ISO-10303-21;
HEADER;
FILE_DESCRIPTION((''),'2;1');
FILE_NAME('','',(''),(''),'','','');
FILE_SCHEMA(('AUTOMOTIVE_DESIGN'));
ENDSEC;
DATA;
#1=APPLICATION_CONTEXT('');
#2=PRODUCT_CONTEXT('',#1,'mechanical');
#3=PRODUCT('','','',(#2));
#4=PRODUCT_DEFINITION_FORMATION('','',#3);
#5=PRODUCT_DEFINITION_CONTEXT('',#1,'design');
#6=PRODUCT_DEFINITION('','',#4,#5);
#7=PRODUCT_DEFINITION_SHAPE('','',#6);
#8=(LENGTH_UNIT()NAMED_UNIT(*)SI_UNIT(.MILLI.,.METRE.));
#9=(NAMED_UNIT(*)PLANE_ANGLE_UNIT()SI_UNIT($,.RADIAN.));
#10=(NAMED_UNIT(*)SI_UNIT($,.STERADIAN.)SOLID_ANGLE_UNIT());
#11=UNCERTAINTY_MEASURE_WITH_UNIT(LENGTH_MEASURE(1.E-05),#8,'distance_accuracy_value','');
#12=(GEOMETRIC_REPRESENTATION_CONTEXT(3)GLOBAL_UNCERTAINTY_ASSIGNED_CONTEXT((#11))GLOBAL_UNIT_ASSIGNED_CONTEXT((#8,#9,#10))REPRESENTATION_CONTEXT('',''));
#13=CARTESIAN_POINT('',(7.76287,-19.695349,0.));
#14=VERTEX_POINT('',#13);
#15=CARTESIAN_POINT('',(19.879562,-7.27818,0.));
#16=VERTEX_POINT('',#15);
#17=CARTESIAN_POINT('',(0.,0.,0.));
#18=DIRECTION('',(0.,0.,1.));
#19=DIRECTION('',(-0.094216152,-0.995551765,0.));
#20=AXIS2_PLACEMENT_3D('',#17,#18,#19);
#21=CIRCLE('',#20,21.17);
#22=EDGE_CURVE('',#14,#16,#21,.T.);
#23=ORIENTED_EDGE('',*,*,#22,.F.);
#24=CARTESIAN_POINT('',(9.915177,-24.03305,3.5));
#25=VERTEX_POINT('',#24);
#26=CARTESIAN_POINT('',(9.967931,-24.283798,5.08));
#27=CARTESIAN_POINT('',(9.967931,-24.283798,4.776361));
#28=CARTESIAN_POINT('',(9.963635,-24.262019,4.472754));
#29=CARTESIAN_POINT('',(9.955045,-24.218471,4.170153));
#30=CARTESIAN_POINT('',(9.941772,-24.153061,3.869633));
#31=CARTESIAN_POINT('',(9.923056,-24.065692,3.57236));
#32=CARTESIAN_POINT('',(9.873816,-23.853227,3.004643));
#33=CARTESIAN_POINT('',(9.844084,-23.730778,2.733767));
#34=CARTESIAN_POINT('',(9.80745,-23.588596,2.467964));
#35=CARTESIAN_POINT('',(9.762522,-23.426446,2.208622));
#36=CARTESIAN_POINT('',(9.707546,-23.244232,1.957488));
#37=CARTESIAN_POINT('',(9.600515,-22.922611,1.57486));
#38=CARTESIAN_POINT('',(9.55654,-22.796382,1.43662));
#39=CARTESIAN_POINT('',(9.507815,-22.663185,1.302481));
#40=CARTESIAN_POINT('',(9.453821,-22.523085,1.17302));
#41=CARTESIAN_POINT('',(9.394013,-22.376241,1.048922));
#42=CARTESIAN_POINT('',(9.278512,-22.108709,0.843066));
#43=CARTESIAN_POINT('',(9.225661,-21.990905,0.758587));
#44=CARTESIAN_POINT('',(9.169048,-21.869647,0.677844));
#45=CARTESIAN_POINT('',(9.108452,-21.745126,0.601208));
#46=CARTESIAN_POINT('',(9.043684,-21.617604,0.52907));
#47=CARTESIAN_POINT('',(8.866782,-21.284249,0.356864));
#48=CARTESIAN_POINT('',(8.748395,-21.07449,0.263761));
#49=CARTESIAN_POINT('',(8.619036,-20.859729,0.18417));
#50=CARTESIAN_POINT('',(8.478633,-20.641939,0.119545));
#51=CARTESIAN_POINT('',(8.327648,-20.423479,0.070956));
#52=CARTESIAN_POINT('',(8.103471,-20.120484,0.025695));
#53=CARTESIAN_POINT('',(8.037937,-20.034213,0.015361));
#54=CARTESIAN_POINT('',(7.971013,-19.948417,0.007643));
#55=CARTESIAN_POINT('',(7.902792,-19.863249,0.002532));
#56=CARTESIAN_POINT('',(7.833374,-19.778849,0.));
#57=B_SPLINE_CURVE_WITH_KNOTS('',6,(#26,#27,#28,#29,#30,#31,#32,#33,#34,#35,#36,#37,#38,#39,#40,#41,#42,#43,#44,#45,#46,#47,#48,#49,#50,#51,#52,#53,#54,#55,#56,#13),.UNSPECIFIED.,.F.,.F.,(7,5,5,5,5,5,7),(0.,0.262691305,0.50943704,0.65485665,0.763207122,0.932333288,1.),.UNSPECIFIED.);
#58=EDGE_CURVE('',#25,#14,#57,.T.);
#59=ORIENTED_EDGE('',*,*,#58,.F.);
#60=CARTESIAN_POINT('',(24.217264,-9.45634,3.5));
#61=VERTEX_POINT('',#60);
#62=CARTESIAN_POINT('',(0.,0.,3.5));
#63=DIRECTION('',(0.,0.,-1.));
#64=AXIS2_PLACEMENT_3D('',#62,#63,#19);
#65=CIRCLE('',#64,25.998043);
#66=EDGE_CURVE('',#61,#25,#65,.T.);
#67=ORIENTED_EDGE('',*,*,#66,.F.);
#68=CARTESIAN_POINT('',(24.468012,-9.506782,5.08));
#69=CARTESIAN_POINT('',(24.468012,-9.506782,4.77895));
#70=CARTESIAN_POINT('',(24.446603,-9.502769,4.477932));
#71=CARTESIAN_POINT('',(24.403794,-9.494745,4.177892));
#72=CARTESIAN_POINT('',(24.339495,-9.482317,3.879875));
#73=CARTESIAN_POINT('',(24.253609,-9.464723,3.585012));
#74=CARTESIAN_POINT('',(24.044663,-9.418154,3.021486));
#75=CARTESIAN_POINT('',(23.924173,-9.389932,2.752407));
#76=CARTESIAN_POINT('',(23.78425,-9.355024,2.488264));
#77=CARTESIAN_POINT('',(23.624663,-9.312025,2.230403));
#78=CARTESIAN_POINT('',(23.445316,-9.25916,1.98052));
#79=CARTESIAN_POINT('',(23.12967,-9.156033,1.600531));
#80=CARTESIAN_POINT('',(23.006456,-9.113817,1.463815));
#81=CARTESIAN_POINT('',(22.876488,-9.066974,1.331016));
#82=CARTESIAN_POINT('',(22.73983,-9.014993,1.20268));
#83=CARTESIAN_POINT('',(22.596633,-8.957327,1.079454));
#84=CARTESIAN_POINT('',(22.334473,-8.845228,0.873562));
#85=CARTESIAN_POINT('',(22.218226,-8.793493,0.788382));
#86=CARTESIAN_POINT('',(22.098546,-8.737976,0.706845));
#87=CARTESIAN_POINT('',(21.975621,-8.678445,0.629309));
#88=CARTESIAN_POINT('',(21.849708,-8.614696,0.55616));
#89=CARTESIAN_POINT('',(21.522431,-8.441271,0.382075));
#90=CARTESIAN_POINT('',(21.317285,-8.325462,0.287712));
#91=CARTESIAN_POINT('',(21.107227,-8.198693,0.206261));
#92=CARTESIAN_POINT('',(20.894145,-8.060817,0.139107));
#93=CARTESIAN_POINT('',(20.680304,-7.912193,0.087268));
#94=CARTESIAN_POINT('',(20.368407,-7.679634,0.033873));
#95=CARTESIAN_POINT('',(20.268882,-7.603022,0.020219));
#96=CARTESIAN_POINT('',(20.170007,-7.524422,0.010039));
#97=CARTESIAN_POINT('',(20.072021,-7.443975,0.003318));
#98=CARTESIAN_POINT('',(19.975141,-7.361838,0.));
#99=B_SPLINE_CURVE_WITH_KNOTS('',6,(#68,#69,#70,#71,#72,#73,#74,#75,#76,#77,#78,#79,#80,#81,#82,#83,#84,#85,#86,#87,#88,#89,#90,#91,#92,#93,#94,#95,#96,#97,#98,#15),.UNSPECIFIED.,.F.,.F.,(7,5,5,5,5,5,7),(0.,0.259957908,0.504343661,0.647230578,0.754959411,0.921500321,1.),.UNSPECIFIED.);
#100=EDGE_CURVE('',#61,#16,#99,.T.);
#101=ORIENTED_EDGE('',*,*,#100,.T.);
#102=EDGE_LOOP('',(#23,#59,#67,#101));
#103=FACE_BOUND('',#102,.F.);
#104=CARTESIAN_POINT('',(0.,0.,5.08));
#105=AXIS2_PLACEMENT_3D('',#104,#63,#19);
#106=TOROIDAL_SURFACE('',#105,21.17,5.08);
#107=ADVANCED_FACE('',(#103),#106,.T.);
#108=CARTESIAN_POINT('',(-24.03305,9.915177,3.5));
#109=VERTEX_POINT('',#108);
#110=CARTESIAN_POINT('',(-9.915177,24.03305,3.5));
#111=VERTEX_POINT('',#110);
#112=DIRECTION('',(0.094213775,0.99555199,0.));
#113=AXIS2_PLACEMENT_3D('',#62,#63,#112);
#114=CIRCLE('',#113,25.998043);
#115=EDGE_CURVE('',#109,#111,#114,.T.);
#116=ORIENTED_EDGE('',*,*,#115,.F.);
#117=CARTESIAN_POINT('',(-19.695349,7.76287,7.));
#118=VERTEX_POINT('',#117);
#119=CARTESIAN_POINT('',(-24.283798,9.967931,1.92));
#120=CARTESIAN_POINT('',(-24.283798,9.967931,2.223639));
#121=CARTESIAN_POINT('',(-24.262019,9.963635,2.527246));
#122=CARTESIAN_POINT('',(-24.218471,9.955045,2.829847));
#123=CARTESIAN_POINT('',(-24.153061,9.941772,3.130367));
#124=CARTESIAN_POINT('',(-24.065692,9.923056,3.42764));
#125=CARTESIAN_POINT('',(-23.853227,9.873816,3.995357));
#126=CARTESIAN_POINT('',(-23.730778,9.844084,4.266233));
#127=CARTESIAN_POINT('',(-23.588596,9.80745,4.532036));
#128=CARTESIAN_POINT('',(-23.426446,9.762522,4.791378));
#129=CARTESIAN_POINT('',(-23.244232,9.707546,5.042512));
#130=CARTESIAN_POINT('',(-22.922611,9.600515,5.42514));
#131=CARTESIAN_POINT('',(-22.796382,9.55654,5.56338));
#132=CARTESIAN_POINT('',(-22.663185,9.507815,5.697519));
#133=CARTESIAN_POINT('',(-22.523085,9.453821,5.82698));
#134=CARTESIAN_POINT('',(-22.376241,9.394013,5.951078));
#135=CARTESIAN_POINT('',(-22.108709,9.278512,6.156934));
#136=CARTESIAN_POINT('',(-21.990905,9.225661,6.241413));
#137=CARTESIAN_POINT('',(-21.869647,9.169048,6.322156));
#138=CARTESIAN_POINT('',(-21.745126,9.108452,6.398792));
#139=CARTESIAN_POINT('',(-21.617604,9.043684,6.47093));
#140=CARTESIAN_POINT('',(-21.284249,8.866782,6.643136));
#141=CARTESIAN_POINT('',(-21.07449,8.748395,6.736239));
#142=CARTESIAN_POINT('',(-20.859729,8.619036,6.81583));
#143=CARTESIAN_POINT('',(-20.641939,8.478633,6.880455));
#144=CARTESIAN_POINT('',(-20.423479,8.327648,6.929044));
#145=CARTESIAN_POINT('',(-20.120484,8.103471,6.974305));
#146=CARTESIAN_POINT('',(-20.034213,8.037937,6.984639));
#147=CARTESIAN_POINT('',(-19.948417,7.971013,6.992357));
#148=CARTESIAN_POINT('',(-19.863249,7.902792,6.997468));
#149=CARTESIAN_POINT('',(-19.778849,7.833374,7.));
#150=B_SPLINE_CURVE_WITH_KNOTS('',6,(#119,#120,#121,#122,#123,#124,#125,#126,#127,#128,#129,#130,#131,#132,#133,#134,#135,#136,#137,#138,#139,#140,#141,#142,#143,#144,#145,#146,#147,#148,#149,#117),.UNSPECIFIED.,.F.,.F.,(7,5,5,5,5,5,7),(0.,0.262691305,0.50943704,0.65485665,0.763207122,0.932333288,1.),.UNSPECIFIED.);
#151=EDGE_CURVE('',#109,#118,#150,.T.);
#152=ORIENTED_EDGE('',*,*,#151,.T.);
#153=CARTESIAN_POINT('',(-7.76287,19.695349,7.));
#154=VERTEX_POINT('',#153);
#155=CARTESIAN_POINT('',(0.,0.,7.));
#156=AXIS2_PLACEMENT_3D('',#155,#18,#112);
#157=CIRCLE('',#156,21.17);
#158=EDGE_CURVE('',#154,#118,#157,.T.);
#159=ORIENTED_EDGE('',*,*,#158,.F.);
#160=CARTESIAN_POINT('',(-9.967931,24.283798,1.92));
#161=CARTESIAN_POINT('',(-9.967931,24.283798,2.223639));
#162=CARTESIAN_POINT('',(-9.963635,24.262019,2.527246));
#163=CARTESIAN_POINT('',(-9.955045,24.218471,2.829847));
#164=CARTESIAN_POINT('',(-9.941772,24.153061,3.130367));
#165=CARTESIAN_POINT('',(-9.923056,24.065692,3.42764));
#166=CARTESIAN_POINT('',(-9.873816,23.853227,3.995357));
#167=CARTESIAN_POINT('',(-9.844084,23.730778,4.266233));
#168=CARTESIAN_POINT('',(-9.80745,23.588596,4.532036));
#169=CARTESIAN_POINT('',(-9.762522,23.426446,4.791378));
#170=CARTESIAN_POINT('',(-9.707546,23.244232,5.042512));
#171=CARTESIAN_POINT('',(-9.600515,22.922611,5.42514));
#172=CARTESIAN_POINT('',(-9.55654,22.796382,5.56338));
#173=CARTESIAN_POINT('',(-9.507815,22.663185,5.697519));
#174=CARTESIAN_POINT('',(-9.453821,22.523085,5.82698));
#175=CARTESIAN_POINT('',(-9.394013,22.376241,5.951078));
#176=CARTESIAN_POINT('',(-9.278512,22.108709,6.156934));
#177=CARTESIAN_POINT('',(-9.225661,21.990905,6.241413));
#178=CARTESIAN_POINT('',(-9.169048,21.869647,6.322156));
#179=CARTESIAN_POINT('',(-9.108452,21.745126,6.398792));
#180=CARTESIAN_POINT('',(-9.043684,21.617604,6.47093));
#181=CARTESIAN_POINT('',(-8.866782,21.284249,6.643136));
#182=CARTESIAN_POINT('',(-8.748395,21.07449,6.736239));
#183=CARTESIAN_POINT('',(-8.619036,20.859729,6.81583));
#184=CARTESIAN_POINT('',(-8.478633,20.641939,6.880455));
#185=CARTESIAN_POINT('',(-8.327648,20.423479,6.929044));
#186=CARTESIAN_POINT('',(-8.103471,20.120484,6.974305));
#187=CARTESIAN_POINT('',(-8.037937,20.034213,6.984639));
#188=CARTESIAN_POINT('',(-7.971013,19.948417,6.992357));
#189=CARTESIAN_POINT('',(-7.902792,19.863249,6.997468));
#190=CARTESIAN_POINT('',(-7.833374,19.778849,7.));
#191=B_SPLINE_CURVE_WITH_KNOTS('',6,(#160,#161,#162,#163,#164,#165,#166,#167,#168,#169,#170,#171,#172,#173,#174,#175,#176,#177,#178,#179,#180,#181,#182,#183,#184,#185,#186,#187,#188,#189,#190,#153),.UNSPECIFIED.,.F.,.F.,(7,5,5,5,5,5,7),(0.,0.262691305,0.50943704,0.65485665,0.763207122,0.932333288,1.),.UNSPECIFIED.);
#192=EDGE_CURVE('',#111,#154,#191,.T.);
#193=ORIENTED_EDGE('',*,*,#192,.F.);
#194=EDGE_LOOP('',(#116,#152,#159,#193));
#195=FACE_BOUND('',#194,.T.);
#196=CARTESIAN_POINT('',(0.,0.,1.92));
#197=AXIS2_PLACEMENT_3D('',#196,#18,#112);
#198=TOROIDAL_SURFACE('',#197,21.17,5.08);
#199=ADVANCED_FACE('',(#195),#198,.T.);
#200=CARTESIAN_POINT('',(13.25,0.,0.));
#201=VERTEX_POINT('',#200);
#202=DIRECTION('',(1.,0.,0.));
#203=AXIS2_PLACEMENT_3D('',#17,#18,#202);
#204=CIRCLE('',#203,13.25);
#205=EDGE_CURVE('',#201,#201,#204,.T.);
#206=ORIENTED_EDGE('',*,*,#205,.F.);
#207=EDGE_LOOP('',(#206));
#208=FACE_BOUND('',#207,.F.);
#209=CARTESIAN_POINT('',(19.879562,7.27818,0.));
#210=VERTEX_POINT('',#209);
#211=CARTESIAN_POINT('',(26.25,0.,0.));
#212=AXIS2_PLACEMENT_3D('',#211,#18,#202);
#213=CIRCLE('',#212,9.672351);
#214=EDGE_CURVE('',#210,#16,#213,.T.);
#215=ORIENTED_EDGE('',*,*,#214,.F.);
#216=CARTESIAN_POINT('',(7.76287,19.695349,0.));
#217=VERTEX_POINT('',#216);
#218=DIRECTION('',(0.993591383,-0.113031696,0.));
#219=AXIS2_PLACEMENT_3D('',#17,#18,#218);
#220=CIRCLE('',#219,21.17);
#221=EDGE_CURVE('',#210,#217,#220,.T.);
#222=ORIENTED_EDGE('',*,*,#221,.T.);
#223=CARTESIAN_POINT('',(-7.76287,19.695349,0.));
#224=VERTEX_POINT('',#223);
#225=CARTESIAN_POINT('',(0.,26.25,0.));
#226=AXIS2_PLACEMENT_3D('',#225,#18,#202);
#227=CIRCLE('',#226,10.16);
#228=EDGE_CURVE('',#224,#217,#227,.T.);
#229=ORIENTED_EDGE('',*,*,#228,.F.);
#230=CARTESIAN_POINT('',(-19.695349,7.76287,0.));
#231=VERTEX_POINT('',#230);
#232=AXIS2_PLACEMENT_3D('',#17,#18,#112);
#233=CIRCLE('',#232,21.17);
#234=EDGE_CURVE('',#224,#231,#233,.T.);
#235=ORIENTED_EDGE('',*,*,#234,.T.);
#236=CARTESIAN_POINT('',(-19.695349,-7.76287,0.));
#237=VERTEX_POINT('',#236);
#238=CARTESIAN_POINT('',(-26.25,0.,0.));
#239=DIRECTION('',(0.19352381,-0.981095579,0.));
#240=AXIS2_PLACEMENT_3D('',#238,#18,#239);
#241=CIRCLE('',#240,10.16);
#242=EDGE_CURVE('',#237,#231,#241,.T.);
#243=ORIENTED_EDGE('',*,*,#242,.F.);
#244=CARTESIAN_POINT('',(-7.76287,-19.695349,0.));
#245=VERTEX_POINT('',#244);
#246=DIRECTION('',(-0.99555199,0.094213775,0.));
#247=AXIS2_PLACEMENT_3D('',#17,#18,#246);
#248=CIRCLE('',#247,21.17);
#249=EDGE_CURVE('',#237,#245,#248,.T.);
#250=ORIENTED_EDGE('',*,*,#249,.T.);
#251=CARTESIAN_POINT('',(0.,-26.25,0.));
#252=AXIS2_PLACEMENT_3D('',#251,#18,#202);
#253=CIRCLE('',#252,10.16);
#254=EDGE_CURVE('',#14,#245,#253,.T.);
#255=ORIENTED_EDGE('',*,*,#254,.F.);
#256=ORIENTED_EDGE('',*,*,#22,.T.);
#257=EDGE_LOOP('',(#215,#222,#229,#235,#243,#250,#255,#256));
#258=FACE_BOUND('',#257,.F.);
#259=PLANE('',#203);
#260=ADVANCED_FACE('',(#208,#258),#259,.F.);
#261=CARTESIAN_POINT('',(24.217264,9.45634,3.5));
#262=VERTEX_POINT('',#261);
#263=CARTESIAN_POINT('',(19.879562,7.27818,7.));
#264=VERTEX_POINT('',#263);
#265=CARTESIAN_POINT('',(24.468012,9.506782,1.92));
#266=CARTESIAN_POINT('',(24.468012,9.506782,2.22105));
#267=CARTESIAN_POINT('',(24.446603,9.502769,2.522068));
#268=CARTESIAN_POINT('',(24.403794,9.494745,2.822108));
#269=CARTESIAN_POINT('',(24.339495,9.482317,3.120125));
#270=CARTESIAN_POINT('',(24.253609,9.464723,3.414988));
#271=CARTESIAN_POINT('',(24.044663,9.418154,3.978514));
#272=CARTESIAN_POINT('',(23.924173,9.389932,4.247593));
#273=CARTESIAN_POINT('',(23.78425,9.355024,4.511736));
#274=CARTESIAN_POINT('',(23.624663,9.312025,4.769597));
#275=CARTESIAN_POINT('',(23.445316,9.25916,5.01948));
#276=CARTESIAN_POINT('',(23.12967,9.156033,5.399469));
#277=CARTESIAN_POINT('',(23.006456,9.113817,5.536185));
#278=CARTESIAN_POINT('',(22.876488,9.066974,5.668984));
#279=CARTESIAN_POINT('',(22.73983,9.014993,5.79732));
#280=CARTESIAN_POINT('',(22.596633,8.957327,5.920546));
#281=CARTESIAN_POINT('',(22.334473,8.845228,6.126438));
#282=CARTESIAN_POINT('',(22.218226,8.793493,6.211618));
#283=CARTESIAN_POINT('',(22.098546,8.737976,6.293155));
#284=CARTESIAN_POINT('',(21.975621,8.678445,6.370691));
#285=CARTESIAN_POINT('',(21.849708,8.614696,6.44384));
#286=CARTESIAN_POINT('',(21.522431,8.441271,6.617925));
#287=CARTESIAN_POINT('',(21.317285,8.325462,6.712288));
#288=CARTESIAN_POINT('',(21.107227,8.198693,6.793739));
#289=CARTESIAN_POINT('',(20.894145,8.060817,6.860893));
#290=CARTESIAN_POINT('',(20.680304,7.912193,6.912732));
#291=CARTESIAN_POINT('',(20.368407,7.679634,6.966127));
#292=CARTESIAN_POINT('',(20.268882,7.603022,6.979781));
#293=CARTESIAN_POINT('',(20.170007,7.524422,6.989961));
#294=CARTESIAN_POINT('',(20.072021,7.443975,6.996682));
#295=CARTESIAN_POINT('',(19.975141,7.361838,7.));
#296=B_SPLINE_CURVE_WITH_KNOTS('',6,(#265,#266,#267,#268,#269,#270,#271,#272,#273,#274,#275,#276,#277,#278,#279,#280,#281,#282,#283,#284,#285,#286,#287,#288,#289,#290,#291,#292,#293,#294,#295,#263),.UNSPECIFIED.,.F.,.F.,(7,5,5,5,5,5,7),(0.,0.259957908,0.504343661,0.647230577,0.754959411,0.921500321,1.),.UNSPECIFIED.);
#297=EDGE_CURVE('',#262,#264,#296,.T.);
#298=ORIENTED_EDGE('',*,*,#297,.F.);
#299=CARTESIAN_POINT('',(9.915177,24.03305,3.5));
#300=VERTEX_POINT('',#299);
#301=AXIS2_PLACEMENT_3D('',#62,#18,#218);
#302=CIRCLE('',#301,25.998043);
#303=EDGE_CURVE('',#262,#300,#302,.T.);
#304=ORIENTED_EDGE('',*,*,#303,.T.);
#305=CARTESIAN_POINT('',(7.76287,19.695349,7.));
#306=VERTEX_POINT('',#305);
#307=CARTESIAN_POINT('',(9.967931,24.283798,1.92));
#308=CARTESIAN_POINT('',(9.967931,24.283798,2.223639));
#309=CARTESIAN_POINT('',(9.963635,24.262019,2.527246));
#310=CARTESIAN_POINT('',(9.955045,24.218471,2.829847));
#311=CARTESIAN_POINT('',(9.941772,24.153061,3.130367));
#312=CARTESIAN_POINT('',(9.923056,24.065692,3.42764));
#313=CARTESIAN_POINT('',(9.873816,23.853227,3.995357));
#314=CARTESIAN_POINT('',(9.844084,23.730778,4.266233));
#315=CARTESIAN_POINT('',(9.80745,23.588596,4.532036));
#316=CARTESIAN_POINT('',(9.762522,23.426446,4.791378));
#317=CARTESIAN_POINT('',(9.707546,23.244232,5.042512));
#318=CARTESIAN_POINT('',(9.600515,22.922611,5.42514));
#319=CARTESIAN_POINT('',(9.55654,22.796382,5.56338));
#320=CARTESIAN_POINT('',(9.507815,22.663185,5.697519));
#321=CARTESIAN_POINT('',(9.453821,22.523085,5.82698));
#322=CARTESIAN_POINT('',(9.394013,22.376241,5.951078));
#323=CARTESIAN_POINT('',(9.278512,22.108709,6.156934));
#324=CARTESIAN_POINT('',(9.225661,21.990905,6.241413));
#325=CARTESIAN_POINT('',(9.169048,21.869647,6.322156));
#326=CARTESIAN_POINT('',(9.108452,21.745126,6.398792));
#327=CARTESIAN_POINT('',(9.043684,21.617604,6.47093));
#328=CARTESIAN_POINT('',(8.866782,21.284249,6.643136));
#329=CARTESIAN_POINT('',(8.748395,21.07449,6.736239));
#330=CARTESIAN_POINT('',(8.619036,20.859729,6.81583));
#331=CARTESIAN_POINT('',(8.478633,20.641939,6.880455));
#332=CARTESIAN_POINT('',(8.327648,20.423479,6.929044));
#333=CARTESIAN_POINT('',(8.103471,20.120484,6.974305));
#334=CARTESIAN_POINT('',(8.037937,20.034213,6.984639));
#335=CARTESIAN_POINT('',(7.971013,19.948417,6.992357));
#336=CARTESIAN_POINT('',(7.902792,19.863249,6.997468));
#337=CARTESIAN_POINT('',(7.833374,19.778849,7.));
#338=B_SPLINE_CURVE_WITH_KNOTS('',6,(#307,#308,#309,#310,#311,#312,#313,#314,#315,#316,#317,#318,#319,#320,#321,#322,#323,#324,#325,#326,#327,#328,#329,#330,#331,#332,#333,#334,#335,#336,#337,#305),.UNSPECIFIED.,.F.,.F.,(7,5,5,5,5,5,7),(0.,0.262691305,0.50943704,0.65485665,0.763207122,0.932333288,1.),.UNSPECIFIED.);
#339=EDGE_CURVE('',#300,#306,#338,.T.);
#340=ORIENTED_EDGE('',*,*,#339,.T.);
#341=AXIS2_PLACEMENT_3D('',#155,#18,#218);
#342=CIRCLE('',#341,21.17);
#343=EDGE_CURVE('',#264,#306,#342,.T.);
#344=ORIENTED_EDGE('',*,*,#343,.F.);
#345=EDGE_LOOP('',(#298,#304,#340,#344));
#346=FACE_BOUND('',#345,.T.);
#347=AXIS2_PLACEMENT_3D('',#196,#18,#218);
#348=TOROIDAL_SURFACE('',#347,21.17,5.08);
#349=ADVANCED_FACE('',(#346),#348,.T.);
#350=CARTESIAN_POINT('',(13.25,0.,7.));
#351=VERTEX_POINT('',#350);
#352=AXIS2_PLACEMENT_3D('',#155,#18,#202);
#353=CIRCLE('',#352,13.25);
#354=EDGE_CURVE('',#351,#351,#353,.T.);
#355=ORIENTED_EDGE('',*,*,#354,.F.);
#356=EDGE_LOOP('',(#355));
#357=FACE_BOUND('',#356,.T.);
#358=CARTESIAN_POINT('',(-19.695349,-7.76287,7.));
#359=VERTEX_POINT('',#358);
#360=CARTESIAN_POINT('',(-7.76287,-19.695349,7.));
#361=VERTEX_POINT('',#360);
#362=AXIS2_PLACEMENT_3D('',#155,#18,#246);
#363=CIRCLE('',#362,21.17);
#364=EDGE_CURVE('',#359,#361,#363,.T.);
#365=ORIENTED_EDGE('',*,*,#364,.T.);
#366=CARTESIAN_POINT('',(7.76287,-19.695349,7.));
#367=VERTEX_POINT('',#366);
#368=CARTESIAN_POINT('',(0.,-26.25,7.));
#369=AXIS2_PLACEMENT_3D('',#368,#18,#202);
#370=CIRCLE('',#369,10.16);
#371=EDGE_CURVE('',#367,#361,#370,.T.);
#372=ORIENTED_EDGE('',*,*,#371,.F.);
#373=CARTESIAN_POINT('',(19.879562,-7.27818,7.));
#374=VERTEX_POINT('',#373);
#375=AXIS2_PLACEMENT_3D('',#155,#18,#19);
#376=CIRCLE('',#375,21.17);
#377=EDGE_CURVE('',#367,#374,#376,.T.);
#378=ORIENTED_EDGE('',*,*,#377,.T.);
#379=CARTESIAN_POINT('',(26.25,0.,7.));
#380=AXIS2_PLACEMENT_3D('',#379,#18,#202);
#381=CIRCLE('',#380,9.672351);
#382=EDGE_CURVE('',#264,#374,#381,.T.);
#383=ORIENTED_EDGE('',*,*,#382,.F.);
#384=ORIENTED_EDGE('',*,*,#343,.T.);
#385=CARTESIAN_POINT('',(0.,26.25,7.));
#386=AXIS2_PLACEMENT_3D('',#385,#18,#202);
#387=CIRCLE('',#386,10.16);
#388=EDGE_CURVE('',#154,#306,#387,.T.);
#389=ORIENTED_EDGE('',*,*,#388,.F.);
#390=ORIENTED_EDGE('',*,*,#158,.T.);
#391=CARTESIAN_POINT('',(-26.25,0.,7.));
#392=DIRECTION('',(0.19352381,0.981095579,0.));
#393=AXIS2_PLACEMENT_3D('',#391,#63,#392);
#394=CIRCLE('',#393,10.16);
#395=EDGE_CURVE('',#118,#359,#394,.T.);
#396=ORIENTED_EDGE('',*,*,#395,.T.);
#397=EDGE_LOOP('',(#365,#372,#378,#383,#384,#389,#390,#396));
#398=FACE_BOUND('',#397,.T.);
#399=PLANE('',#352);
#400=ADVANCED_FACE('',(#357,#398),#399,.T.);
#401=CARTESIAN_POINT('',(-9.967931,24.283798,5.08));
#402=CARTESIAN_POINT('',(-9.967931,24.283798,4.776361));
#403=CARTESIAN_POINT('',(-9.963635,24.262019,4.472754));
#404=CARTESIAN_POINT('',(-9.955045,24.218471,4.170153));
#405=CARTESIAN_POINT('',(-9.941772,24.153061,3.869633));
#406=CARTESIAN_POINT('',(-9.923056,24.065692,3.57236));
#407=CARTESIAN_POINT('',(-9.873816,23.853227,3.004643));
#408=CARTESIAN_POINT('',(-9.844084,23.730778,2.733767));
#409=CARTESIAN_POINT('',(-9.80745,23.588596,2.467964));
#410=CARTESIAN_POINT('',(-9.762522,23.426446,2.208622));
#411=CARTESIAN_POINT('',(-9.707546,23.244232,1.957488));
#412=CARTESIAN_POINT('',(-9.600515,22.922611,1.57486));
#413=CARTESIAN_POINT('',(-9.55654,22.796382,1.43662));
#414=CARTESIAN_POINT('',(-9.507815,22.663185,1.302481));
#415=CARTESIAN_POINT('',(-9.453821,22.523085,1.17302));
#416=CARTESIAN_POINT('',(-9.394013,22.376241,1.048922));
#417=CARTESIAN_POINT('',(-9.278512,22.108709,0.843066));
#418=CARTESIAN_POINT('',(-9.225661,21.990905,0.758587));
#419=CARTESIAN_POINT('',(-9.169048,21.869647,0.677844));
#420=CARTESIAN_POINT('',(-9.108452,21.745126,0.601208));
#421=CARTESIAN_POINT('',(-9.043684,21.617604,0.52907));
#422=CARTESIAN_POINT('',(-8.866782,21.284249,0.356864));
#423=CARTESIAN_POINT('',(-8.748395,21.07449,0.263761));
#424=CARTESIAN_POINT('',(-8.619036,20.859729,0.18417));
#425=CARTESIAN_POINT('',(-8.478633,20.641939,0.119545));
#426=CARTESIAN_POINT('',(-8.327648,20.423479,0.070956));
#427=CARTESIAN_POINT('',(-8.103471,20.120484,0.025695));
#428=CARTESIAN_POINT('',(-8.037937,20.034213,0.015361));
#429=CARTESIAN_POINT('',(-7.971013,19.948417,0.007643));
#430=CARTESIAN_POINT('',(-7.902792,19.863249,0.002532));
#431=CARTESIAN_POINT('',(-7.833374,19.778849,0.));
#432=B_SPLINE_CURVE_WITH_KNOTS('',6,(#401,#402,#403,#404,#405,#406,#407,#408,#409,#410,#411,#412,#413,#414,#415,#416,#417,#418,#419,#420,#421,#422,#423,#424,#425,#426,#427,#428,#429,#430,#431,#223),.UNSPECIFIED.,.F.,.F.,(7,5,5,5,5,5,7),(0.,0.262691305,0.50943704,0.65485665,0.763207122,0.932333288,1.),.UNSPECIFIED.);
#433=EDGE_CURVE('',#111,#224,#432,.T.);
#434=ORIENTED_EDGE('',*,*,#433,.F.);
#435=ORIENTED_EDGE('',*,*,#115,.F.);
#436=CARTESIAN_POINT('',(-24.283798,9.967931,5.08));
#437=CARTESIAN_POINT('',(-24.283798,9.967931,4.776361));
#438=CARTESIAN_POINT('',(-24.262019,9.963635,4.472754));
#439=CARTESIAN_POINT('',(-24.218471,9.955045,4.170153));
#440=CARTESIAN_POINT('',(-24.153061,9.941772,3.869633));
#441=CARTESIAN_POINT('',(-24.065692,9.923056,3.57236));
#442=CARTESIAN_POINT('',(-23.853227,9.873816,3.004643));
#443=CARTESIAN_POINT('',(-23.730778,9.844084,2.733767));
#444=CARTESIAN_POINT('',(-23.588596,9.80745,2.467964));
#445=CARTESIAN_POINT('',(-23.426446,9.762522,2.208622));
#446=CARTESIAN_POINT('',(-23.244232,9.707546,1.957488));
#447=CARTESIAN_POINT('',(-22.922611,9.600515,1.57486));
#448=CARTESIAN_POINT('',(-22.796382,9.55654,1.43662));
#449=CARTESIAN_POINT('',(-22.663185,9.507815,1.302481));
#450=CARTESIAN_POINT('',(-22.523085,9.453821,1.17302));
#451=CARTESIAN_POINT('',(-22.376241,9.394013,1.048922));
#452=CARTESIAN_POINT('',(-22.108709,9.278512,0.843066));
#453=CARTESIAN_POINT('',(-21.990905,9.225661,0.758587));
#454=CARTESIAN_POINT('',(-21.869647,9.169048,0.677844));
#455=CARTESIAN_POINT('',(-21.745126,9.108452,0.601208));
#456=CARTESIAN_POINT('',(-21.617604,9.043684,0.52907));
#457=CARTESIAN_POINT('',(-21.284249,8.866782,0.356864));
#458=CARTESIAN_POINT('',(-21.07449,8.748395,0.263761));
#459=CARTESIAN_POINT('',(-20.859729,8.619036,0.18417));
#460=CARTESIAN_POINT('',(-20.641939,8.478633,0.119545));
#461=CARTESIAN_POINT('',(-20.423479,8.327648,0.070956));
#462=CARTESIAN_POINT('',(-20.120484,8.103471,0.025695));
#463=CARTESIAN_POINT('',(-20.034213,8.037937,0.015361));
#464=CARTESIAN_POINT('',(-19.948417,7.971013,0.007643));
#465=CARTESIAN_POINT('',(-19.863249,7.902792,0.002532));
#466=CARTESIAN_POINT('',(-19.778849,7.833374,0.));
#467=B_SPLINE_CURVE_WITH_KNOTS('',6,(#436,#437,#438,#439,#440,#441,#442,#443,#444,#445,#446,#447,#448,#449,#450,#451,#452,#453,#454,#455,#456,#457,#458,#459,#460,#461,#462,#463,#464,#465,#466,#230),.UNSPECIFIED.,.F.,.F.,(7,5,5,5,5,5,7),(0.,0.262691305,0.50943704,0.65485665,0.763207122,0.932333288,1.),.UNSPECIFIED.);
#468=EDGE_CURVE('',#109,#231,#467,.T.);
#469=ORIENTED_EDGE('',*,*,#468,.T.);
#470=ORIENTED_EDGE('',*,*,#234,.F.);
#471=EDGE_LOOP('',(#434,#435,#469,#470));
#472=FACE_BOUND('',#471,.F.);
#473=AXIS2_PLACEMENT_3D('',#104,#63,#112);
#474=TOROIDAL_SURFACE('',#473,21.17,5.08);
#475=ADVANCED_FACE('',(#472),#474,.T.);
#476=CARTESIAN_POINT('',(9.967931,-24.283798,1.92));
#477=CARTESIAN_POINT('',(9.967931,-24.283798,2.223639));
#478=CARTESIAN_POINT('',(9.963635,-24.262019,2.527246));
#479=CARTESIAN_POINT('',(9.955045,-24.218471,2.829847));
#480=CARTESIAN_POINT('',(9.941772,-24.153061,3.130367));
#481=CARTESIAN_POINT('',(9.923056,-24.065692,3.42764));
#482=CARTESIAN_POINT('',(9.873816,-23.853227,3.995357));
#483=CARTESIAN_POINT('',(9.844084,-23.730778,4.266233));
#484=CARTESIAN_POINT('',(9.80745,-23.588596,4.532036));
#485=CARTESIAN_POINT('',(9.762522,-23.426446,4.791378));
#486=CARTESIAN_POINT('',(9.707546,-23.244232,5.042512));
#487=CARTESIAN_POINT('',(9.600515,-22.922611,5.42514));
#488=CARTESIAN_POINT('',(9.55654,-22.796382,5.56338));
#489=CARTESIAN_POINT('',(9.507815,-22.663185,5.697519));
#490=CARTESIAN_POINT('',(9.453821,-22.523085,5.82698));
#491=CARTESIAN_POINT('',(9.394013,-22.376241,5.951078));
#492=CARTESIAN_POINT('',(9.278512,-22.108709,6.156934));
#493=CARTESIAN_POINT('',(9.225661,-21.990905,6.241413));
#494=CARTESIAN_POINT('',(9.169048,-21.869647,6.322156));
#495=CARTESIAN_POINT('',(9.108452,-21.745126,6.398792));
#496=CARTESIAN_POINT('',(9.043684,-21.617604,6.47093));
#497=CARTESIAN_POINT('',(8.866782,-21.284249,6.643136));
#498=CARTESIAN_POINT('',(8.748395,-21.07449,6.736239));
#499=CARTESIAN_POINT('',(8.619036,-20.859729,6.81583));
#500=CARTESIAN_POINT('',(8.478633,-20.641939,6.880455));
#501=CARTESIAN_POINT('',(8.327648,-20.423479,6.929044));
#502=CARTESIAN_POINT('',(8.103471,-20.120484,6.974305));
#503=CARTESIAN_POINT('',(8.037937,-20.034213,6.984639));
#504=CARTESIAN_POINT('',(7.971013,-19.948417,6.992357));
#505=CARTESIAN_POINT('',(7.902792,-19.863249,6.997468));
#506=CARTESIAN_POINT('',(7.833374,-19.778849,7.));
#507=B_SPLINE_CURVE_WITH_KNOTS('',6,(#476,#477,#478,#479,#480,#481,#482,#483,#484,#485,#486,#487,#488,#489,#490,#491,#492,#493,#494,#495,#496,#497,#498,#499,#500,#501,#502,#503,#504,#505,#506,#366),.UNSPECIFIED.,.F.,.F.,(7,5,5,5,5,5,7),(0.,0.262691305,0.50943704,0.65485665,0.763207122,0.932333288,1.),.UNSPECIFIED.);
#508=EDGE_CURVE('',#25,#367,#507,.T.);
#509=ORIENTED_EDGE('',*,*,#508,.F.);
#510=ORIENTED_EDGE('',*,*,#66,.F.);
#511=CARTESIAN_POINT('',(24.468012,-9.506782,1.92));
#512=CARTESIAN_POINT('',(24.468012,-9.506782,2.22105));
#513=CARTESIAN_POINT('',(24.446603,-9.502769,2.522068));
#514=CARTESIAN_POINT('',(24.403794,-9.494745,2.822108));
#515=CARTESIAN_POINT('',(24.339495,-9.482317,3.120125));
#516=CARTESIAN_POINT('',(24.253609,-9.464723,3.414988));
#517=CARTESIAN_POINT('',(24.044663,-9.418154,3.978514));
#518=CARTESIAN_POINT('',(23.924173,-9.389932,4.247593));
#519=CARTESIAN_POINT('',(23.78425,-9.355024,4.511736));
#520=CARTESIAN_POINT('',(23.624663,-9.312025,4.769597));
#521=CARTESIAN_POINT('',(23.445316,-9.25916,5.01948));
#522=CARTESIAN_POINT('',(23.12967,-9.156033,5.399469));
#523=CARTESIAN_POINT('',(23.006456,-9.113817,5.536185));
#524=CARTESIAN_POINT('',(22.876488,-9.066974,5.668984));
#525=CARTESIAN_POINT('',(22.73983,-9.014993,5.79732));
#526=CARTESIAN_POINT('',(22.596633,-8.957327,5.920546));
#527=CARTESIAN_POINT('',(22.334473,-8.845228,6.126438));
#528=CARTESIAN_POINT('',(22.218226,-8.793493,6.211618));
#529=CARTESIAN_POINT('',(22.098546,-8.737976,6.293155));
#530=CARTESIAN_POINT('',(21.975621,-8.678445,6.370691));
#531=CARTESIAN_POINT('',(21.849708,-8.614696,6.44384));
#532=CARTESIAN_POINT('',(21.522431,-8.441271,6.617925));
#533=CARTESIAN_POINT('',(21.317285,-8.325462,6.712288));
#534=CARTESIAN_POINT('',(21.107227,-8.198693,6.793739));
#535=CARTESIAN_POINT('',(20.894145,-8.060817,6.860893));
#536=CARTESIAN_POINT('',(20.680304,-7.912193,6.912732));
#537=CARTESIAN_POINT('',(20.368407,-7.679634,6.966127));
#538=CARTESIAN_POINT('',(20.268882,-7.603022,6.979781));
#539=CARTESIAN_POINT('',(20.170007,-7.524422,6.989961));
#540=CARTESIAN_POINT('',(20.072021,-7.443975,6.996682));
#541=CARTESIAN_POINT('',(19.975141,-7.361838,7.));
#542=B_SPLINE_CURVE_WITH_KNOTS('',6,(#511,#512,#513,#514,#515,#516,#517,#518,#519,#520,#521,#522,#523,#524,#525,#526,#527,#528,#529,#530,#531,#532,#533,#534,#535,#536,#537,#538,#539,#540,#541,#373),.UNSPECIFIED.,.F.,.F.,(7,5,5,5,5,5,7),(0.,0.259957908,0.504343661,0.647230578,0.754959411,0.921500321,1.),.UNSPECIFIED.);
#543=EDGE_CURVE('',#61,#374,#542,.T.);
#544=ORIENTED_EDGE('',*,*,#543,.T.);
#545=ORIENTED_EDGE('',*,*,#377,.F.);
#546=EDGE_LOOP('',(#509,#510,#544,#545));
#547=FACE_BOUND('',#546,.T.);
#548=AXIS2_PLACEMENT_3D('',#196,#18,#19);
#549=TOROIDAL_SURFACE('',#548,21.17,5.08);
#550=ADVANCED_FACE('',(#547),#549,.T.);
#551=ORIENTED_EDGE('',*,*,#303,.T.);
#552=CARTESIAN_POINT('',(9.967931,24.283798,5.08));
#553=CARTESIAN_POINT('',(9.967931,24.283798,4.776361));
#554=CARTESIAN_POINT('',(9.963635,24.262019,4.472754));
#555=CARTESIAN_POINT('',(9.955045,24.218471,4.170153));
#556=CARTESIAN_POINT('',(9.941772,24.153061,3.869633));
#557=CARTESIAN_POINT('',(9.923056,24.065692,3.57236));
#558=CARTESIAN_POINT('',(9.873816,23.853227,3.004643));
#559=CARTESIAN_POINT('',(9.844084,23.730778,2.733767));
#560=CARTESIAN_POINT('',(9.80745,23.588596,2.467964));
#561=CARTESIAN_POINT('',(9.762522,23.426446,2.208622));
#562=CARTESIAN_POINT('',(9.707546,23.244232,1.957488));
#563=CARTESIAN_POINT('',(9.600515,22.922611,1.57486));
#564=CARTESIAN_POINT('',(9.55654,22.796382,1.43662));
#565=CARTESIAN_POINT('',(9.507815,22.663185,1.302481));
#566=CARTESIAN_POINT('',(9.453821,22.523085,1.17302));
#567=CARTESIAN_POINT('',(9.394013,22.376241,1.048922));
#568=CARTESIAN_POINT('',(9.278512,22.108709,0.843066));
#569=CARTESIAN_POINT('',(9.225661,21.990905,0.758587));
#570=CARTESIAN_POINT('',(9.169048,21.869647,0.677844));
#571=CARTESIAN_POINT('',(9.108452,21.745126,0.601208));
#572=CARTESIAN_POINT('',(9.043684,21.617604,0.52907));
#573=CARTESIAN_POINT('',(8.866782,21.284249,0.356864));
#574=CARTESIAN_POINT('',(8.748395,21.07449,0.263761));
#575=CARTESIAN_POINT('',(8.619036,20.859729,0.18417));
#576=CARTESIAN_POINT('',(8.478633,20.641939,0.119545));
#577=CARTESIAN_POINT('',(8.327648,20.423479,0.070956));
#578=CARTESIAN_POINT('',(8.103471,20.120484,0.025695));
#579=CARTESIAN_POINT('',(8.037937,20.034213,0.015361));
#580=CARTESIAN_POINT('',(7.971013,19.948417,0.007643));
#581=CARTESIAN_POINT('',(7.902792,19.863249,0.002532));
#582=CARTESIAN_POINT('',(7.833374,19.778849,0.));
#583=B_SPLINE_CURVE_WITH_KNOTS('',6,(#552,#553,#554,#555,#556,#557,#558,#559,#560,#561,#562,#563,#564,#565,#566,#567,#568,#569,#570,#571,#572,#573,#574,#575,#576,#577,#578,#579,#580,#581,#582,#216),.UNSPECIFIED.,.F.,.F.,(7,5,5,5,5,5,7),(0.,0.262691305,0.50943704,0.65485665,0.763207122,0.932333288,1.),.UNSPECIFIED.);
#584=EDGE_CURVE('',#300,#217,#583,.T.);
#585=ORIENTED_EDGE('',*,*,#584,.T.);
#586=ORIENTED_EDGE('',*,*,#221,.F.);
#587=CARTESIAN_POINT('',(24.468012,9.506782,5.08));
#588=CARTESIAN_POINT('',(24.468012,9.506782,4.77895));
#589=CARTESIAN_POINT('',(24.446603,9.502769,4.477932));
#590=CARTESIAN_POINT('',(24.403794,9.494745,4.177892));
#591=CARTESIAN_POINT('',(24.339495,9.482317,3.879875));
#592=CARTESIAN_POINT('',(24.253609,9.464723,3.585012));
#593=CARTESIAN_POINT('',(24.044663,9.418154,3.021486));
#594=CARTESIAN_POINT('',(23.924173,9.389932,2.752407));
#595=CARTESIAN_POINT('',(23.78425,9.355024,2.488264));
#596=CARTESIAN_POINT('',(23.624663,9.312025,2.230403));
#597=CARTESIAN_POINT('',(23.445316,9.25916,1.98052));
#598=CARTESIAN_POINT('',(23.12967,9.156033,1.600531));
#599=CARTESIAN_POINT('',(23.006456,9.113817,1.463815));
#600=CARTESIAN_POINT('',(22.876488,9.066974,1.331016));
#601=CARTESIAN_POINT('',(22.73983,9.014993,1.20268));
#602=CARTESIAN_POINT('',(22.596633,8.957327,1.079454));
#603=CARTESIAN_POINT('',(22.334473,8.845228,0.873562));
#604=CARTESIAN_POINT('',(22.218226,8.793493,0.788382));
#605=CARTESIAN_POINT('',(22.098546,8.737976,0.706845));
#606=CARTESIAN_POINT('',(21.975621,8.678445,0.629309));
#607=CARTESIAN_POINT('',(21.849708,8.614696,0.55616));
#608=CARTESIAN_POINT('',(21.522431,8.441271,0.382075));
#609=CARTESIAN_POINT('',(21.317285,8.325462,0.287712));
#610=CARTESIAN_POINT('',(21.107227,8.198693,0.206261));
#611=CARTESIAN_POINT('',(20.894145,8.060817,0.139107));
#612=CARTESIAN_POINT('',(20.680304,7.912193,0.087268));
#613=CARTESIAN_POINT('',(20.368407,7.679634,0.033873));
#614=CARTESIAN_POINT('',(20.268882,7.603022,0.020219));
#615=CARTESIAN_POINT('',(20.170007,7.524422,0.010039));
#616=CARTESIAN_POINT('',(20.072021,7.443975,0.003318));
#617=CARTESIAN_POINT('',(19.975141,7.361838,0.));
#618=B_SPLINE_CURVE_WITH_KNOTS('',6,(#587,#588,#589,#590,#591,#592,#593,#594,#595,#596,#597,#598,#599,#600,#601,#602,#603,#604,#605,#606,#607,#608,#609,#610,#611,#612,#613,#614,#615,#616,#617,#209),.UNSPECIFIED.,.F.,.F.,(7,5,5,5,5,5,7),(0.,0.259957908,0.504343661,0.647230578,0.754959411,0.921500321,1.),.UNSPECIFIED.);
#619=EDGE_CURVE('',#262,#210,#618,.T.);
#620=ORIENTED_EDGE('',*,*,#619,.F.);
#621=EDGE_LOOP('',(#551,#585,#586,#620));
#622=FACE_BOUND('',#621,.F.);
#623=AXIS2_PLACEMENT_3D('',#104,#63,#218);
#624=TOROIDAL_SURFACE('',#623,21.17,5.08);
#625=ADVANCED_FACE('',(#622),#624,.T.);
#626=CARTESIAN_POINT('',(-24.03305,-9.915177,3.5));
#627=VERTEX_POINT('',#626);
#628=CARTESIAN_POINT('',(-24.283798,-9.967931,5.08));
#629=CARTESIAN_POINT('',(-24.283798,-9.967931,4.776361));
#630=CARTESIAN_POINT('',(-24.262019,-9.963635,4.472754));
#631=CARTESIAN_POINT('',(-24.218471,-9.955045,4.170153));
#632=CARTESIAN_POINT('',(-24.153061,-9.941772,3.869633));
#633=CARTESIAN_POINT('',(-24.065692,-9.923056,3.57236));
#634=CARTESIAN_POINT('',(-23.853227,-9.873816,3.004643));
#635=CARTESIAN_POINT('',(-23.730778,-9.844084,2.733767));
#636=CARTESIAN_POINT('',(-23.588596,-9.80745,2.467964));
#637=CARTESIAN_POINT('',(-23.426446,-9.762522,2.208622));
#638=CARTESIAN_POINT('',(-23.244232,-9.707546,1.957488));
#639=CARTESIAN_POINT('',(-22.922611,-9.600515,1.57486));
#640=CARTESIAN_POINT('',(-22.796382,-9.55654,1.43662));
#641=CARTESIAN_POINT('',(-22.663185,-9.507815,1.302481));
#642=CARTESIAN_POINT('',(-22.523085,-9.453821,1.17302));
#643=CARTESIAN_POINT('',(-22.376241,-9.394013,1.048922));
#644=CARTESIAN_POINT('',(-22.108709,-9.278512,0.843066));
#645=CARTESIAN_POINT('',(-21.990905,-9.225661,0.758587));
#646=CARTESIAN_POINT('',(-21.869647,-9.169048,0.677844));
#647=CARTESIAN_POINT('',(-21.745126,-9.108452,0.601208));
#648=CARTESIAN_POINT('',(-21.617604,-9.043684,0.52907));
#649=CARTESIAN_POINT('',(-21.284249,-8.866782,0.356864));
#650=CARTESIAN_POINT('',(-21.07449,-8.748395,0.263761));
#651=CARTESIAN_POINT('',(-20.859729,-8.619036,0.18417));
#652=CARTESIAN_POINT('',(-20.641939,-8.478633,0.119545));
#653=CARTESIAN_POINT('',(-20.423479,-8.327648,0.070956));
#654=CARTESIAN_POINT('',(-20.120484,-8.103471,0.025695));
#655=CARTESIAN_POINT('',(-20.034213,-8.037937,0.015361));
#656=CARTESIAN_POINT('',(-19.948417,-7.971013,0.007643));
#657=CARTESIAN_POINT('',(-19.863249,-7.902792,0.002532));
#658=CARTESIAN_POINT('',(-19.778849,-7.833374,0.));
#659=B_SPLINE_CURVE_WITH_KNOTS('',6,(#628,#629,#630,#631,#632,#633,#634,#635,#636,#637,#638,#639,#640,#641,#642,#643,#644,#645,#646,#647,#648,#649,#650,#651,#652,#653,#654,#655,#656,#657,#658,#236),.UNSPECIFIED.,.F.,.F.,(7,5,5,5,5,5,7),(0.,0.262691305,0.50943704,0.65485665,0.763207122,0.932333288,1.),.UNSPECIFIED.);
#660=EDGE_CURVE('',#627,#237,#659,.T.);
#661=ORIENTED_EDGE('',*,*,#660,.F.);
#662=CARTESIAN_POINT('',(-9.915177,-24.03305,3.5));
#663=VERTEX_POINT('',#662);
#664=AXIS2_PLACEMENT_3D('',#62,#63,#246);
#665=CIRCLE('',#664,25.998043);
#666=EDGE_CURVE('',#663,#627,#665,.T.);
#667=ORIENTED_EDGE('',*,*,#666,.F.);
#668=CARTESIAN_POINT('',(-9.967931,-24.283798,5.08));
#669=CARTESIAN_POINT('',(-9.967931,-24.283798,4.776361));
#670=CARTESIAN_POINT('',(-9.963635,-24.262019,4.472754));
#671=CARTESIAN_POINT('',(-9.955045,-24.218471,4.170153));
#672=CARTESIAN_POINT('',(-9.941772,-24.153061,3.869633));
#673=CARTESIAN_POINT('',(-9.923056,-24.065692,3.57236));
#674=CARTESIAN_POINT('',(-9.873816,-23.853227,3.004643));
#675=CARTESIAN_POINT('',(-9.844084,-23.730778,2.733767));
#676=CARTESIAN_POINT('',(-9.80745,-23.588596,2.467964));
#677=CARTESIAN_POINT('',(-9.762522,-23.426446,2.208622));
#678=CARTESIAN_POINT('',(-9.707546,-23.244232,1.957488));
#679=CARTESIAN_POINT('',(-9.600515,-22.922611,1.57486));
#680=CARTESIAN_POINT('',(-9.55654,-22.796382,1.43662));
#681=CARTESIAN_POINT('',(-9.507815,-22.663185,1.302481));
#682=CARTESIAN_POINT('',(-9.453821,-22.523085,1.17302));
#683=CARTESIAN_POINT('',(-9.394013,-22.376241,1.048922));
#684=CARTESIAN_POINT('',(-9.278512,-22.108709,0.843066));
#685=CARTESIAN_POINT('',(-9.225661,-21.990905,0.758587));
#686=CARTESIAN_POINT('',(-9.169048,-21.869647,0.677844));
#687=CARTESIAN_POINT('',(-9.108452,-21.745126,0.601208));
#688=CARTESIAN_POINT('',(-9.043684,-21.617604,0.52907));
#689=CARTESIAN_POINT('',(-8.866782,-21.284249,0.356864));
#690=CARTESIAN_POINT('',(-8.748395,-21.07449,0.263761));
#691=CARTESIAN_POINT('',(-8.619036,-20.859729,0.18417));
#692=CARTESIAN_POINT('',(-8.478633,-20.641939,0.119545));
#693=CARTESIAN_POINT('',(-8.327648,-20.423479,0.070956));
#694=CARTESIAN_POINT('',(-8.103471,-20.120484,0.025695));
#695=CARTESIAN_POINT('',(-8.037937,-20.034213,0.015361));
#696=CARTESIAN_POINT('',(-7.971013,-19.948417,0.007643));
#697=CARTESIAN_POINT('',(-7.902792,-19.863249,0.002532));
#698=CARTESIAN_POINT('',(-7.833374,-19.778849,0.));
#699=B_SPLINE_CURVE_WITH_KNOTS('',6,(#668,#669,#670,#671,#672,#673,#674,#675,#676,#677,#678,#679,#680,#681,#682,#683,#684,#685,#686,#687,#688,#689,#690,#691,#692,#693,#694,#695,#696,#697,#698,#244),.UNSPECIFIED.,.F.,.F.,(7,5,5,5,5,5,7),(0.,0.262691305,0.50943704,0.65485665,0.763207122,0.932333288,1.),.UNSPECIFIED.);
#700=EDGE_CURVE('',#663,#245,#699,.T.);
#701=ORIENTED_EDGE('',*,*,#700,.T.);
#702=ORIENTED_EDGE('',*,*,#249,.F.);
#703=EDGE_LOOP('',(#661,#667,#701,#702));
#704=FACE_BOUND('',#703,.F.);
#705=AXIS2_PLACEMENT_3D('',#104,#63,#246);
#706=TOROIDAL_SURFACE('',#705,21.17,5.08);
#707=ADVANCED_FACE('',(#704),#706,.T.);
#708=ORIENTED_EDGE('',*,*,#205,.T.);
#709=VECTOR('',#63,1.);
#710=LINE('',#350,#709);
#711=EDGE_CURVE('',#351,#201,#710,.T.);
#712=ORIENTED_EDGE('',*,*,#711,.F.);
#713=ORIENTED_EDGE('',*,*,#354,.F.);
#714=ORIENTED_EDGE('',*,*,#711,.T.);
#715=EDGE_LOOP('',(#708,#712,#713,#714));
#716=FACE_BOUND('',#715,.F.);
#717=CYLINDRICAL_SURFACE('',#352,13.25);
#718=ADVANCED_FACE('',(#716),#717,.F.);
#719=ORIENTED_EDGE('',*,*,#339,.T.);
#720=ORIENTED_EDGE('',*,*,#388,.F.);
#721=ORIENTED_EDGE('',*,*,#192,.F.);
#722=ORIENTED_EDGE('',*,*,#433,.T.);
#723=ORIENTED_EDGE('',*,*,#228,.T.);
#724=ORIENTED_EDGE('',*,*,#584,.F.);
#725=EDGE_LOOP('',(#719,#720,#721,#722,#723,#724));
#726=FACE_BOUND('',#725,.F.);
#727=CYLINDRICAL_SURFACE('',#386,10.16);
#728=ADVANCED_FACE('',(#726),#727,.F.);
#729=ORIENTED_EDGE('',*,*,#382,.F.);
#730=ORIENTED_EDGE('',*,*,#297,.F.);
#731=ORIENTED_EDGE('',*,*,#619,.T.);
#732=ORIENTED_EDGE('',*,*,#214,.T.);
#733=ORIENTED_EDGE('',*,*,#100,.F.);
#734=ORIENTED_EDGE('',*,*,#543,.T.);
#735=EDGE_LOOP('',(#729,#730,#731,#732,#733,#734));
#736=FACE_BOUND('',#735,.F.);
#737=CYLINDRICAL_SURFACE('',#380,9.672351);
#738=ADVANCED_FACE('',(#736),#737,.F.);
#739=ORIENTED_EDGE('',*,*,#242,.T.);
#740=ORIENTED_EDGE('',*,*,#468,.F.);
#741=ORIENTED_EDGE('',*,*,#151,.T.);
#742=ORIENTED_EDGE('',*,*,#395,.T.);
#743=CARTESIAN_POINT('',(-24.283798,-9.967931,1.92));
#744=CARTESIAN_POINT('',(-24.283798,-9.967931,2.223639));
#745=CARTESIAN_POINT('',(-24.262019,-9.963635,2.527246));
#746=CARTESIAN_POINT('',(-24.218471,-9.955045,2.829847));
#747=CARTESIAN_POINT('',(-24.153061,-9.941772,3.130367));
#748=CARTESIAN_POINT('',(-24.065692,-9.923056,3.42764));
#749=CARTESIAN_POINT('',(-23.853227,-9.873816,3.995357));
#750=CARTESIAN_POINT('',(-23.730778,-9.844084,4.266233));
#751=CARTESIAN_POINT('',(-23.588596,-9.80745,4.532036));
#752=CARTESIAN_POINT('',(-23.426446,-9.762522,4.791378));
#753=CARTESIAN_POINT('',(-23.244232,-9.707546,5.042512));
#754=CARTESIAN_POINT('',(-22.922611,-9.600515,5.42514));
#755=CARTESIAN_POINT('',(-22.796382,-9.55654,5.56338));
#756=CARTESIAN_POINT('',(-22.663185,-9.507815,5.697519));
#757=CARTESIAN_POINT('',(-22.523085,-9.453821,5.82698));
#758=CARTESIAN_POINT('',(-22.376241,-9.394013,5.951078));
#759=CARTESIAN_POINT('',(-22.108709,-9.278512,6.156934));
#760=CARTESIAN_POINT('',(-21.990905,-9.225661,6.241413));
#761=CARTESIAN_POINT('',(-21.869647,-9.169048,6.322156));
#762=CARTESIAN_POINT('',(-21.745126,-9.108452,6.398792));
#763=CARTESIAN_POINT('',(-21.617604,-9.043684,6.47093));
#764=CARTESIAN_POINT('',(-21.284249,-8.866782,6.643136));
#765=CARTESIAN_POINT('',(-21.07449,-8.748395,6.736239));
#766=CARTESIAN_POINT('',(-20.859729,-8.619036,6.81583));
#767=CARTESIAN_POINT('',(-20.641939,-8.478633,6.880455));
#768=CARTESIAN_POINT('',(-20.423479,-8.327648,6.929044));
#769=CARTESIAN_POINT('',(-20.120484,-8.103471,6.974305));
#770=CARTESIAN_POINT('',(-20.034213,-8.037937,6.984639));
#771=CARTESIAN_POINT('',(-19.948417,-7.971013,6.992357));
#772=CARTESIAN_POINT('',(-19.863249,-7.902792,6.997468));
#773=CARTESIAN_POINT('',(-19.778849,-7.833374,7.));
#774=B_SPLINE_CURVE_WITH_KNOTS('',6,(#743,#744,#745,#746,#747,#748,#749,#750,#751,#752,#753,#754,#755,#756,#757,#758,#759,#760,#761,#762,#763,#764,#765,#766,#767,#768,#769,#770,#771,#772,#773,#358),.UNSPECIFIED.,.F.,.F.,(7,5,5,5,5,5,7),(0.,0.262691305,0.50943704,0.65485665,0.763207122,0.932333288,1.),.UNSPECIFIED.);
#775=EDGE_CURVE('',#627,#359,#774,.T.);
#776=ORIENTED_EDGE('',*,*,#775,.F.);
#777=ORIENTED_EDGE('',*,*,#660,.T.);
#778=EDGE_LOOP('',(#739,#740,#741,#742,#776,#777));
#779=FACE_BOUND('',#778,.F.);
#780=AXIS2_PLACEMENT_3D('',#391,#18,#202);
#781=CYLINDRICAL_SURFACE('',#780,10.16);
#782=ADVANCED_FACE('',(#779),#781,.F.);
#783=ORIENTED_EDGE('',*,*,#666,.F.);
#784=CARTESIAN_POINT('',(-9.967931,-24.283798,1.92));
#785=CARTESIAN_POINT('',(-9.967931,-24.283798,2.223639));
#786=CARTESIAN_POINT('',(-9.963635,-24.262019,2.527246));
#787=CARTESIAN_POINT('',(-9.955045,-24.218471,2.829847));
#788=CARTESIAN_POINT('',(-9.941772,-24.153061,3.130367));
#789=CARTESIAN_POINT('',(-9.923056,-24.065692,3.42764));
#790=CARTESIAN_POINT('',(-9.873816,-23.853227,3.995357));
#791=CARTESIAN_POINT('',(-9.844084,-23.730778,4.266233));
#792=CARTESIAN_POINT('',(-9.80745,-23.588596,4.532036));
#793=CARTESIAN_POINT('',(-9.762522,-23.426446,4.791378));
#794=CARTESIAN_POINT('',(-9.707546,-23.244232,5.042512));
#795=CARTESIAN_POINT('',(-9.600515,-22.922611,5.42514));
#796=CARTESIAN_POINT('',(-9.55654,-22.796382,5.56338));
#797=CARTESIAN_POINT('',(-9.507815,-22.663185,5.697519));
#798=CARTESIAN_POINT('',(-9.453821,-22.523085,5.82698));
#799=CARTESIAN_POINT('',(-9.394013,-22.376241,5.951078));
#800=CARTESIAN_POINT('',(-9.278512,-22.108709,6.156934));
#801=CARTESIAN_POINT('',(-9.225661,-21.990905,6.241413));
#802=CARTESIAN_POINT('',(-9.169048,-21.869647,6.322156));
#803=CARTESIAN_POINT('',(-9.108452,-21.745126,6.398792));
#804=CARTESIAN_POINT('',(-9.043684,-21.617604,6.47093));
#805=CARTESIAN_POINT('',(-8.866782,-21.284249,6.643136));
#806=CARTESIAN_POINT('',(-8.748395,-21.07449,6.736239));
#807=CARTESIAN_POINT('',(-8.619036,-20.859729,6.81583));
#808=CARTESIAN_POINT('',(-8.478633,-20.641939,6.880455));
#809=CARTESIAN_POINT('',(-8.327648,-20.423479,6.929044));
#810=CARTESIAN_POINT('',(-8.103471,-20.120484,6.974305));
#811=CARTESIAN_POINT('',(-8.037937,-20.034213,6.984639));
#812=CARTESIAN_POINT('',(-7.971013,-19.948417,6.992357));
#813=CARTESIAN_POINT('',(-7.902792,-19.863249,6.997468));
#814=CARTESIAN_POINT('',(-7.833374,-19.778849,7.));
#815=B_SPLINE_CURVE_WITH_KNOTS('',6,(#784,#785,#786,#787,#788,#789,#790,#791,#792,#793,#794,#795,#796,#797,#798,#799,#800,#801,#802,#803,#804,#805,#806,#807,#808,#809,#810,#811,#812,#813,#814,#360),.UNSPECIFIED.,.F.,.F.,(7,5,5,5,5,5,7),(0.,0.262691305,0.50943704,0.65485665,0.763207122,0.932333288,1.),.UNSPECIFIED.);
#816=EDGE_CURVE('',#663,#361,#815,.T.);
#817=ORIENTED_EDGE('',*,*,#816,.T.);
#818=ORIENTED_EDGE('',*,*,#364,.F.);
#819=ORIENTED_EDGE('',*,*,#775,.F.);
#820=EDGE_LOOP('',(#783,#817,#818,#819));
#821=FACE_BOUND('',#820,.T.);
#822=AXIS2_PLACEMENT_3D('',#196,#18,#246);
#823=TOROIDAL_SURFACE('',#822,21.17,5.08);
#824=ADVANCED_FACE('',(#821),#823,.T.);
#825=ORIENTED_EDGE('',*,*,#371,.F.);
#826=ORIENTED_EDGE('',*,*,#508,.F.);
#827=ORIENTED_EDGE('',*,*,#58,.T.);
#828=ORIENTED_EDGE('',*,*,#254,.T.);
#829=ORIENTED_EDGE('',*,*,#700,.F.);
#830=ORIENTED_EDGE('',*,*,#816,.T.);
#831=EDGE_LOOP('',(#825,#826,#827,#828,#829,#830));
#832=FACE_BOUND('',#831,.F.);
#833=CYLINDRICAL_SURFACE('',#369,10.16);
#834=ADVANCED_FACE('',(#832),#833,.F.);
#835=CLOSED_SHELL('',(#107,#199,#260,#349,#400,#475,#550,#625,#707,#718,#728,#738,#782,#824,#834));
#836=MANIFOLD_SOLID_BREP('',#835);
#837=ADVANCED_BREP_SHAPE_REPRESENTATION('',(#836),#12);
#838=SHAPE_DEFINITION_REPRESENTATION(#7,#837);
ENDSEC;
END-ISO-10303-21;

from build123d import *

# Parameters (mm, degrees)
F0_R         = 26.25
F1_DEPTH     = 7
F2_R         = 13.25
F3_DEPTH     = 25.4
F4_R         = 10.16
F4_R_2       = 9.6723514766
F5_DEPTH     = 25.4
F6_T2_ANGLE  = 101.8963155292
F6_T4_ANGLE  = 100.8121389037
F6_T6_ANGLE  = 100.8121389037
F6_T8_ANGLE  = 100.8121389037
F6_T10_ANGLE = 100.8121389037
F6_T12_ANGLE = 101.8963155292
F6_T14_ANGLE = 101.8963155292
F6_T16_ANGLE = 101.8963155292


# Not quite as in the source:
# - a fillet or chamfer that OpenCascade refuses, or shapes differently, is made with other operations: its cross-section is extruded or revolved along the edge and cut away or added


with BuildPart() as f1:
    # F0 (on Top) → F1 (new body)
    with BuildSketch(Plane.XY):
        Circle(F0_R)
    extrude(amount=F1_DEPTH)

    # F2 (on face) → F3 (cut)
    with BuildSketch(Plane.XY.offset(7)):
        Circle(F2_R)
    extrude(amount=-F3_DEPTH, mode=Mode.SUBTRACT)

    # F4 (on face) → F5 (cut)
    with BuildSketch(Plane.XY.offset(7)):
        with Locations((0, -26.25)):
            Circle(F4_R)
        with Locations((-26.25, 0)):
            Circle(F4_R)
        with Locations((0, 26.25)):
            Circle(F4_R)
        with Locations((26.25, 0)):
            Circle(F4_R_2)
    extrude(amount=-F5_DEPTH, mode=Mode.SUBTRACT)

    # F6: fillet of radius 5.08 on 8 edges, made by hand

    # F6_s1 → F6_t2 (revolve, cut)
    with BuildSketch(Plane(origin=(0, 0, 0), x_dir=(0, 0, 1), z_dir=(-0.995551765, 0.0942161515, 0))):
        with BuildLine():
            ThreePointArc((5.08, -26.25), (1.4878975516, -24.7621024484), (0, -21.17))
            Line((0, -21.17), (0, -26.25))
            Line((0, -26.25), (5.08, -26.25))
        make_face()
    revolve(axis=Axis((0, 0, 0), (0, 0, 1)), revolution_arc=F6_T2_ANGLE, mode=Mode.SUBTRACT)

    # F6_s3 → F6_t4 (revolve, cut)
    with BuildSketch(Plane(origin=(0, 0, 0), x_dir=(0, 0, 1), z_dir=(0.0942137746, 0.9955519899, 0))):
        with BuildLine():
            ThreePointArc((5.08, -26.25), (1.4878975516, -24.7621024484), (0, -21.17))
            Line((0, -21.17), (0, -26.25))
            Line((0, -26.25), (5.08, -26.25))
        make_face()
    revolve(axis=Axis((0, 0, 0), (0, 0, 1)), revolution_arc=F6_T4_ANGLE, mode=Mode.SUBTRACT)

    # F6_s5 → F6_t6 (revolve, cut)
    with BuildSketch(Plane(origin=(0, 0, 0), x_dir=(0, 0, 1), z_dir=(0.9955519899, -0.0942137746, 0))):
        with BuildLine():
            ThreePointArc((5.08, -26.25), (1.4878975516, -24.7621024484), (0, -21.17))
            Line((0, -21.17), (0, -26.25))
            Line((0, -26.25), (5.08, -26.25))
        make_face()
    revolve(axis=Axis((0, 0, 0), (0, 0, 1)), revolution_arc=F6_T6_ANGLE, mode=Mode.SUBTRACT)

    # F6_s7 → F6_t8 (revolve, cut)
    with BuildSketch(Plane(origin=(0, 0, 0), x_dir=(0, 0, 1), z_dir=(0.9955519899, -0.0942137746, 0))):
        with BuildLine():
            ThreePointArc((1.92, -26.25), (5.5121024484, -24.7621024484), (7, -21.17))
            Line((7, -21.17), (7, -26.25))
            Line((7, -26.25), (1.92, -26.25))
        make_face()
    revolve(axis=Axis((0, 0, 7), (0, 0, 1)), revolution_arc=F6_T8_ANGLE, mode=Mode.SUBTRACT)

    # F6_s9 → F6_t10 (revolve, cut)
    with BuildSketch(Plane(origin=(0, 0, 0), x_dir=(0, 0, 1), z_dir=(0.0942137746, 0.9955519899, 0))):
        with BuildLine():
            ThreePointArc((1.92, -26.25), (5.5121024484, -24.7621024484), (7, -21.17))
            Line((7, -21.17), (7, -26.25))
            Line((7, -26.25), (1.92, -26.25))
        make_face()
    revolve(axis=Axis((0, 0, 7), (0, 0, 1)), revolution_arc=F6_T10_ANGLE, mode=Mode.SUBTRACT)

    # F6_s11 → F6_t12 (revolve, cut)
    with BuildSketch(Plane(origin=(0, 0, 0), x_dir=(0, 0, 1), z_dir=(-0.995551765, 0.0942161515, 0))):
        with BuildLine():
            ThreePointArc((1.92, -26.25), (5.5121024484, -24.7621024484), (7, -21.17))
            Line((7, -21.17), (7, -26.25))
            Line((7, -26.25), (1.92, -26.25))
        make_face()
    revolve(axis=Axis((0, 0, 7), (0, 0, 1)), revolution_arc=F6_T12_ANGLE, mode=Mode.SUBTRACT)

    # F6_s13 → F6_t14 (revolve, cut)
    with BuildSketch(Plane(origin=(0, 0, 0), x_dir=(0, 0, 1), z_dir=(-0.1130316961, -0.9935913826, 0))):
        with BuildLine():
            ThreePointArc((1.92, -26.25), (5.5121024484, -24.7621024484), (7, -21.17))
            Line((7, -21.17), (7, -26.25))
            Line((7, -26.25), (1.92, -26.25))
        make_face()
    revolve(axis=Axis((0, 0, 7), (0, 0, 1)), revolution_arc=F6_T14_ANGLE, mode=Mode.SUBTRACT)

    # F6_s15 → F6_t16 (revolve, cut)
    with BuildSketch(Plane(origin=(0, 0, 0), x_dir=(0, 0, 1), z_dir=(-0.1130316961, -0.9935913826, 0))):
        with BuildLine():
            ThreePointArc((5.08, -26.25), (1.4878975516, -24.7621024484), (0, -21.17))
            Line((0, -21.17), (0, -26.25))
            Line((0, -26.25), (5.08, -26.25))
        make_face()
    revolve(axis=Axis((0, 0, 0), (0, 0, 1)), revolution_arc=F6_T16_ANGLE, mode=Mode.SUBTRACT)


solid = f1.part
